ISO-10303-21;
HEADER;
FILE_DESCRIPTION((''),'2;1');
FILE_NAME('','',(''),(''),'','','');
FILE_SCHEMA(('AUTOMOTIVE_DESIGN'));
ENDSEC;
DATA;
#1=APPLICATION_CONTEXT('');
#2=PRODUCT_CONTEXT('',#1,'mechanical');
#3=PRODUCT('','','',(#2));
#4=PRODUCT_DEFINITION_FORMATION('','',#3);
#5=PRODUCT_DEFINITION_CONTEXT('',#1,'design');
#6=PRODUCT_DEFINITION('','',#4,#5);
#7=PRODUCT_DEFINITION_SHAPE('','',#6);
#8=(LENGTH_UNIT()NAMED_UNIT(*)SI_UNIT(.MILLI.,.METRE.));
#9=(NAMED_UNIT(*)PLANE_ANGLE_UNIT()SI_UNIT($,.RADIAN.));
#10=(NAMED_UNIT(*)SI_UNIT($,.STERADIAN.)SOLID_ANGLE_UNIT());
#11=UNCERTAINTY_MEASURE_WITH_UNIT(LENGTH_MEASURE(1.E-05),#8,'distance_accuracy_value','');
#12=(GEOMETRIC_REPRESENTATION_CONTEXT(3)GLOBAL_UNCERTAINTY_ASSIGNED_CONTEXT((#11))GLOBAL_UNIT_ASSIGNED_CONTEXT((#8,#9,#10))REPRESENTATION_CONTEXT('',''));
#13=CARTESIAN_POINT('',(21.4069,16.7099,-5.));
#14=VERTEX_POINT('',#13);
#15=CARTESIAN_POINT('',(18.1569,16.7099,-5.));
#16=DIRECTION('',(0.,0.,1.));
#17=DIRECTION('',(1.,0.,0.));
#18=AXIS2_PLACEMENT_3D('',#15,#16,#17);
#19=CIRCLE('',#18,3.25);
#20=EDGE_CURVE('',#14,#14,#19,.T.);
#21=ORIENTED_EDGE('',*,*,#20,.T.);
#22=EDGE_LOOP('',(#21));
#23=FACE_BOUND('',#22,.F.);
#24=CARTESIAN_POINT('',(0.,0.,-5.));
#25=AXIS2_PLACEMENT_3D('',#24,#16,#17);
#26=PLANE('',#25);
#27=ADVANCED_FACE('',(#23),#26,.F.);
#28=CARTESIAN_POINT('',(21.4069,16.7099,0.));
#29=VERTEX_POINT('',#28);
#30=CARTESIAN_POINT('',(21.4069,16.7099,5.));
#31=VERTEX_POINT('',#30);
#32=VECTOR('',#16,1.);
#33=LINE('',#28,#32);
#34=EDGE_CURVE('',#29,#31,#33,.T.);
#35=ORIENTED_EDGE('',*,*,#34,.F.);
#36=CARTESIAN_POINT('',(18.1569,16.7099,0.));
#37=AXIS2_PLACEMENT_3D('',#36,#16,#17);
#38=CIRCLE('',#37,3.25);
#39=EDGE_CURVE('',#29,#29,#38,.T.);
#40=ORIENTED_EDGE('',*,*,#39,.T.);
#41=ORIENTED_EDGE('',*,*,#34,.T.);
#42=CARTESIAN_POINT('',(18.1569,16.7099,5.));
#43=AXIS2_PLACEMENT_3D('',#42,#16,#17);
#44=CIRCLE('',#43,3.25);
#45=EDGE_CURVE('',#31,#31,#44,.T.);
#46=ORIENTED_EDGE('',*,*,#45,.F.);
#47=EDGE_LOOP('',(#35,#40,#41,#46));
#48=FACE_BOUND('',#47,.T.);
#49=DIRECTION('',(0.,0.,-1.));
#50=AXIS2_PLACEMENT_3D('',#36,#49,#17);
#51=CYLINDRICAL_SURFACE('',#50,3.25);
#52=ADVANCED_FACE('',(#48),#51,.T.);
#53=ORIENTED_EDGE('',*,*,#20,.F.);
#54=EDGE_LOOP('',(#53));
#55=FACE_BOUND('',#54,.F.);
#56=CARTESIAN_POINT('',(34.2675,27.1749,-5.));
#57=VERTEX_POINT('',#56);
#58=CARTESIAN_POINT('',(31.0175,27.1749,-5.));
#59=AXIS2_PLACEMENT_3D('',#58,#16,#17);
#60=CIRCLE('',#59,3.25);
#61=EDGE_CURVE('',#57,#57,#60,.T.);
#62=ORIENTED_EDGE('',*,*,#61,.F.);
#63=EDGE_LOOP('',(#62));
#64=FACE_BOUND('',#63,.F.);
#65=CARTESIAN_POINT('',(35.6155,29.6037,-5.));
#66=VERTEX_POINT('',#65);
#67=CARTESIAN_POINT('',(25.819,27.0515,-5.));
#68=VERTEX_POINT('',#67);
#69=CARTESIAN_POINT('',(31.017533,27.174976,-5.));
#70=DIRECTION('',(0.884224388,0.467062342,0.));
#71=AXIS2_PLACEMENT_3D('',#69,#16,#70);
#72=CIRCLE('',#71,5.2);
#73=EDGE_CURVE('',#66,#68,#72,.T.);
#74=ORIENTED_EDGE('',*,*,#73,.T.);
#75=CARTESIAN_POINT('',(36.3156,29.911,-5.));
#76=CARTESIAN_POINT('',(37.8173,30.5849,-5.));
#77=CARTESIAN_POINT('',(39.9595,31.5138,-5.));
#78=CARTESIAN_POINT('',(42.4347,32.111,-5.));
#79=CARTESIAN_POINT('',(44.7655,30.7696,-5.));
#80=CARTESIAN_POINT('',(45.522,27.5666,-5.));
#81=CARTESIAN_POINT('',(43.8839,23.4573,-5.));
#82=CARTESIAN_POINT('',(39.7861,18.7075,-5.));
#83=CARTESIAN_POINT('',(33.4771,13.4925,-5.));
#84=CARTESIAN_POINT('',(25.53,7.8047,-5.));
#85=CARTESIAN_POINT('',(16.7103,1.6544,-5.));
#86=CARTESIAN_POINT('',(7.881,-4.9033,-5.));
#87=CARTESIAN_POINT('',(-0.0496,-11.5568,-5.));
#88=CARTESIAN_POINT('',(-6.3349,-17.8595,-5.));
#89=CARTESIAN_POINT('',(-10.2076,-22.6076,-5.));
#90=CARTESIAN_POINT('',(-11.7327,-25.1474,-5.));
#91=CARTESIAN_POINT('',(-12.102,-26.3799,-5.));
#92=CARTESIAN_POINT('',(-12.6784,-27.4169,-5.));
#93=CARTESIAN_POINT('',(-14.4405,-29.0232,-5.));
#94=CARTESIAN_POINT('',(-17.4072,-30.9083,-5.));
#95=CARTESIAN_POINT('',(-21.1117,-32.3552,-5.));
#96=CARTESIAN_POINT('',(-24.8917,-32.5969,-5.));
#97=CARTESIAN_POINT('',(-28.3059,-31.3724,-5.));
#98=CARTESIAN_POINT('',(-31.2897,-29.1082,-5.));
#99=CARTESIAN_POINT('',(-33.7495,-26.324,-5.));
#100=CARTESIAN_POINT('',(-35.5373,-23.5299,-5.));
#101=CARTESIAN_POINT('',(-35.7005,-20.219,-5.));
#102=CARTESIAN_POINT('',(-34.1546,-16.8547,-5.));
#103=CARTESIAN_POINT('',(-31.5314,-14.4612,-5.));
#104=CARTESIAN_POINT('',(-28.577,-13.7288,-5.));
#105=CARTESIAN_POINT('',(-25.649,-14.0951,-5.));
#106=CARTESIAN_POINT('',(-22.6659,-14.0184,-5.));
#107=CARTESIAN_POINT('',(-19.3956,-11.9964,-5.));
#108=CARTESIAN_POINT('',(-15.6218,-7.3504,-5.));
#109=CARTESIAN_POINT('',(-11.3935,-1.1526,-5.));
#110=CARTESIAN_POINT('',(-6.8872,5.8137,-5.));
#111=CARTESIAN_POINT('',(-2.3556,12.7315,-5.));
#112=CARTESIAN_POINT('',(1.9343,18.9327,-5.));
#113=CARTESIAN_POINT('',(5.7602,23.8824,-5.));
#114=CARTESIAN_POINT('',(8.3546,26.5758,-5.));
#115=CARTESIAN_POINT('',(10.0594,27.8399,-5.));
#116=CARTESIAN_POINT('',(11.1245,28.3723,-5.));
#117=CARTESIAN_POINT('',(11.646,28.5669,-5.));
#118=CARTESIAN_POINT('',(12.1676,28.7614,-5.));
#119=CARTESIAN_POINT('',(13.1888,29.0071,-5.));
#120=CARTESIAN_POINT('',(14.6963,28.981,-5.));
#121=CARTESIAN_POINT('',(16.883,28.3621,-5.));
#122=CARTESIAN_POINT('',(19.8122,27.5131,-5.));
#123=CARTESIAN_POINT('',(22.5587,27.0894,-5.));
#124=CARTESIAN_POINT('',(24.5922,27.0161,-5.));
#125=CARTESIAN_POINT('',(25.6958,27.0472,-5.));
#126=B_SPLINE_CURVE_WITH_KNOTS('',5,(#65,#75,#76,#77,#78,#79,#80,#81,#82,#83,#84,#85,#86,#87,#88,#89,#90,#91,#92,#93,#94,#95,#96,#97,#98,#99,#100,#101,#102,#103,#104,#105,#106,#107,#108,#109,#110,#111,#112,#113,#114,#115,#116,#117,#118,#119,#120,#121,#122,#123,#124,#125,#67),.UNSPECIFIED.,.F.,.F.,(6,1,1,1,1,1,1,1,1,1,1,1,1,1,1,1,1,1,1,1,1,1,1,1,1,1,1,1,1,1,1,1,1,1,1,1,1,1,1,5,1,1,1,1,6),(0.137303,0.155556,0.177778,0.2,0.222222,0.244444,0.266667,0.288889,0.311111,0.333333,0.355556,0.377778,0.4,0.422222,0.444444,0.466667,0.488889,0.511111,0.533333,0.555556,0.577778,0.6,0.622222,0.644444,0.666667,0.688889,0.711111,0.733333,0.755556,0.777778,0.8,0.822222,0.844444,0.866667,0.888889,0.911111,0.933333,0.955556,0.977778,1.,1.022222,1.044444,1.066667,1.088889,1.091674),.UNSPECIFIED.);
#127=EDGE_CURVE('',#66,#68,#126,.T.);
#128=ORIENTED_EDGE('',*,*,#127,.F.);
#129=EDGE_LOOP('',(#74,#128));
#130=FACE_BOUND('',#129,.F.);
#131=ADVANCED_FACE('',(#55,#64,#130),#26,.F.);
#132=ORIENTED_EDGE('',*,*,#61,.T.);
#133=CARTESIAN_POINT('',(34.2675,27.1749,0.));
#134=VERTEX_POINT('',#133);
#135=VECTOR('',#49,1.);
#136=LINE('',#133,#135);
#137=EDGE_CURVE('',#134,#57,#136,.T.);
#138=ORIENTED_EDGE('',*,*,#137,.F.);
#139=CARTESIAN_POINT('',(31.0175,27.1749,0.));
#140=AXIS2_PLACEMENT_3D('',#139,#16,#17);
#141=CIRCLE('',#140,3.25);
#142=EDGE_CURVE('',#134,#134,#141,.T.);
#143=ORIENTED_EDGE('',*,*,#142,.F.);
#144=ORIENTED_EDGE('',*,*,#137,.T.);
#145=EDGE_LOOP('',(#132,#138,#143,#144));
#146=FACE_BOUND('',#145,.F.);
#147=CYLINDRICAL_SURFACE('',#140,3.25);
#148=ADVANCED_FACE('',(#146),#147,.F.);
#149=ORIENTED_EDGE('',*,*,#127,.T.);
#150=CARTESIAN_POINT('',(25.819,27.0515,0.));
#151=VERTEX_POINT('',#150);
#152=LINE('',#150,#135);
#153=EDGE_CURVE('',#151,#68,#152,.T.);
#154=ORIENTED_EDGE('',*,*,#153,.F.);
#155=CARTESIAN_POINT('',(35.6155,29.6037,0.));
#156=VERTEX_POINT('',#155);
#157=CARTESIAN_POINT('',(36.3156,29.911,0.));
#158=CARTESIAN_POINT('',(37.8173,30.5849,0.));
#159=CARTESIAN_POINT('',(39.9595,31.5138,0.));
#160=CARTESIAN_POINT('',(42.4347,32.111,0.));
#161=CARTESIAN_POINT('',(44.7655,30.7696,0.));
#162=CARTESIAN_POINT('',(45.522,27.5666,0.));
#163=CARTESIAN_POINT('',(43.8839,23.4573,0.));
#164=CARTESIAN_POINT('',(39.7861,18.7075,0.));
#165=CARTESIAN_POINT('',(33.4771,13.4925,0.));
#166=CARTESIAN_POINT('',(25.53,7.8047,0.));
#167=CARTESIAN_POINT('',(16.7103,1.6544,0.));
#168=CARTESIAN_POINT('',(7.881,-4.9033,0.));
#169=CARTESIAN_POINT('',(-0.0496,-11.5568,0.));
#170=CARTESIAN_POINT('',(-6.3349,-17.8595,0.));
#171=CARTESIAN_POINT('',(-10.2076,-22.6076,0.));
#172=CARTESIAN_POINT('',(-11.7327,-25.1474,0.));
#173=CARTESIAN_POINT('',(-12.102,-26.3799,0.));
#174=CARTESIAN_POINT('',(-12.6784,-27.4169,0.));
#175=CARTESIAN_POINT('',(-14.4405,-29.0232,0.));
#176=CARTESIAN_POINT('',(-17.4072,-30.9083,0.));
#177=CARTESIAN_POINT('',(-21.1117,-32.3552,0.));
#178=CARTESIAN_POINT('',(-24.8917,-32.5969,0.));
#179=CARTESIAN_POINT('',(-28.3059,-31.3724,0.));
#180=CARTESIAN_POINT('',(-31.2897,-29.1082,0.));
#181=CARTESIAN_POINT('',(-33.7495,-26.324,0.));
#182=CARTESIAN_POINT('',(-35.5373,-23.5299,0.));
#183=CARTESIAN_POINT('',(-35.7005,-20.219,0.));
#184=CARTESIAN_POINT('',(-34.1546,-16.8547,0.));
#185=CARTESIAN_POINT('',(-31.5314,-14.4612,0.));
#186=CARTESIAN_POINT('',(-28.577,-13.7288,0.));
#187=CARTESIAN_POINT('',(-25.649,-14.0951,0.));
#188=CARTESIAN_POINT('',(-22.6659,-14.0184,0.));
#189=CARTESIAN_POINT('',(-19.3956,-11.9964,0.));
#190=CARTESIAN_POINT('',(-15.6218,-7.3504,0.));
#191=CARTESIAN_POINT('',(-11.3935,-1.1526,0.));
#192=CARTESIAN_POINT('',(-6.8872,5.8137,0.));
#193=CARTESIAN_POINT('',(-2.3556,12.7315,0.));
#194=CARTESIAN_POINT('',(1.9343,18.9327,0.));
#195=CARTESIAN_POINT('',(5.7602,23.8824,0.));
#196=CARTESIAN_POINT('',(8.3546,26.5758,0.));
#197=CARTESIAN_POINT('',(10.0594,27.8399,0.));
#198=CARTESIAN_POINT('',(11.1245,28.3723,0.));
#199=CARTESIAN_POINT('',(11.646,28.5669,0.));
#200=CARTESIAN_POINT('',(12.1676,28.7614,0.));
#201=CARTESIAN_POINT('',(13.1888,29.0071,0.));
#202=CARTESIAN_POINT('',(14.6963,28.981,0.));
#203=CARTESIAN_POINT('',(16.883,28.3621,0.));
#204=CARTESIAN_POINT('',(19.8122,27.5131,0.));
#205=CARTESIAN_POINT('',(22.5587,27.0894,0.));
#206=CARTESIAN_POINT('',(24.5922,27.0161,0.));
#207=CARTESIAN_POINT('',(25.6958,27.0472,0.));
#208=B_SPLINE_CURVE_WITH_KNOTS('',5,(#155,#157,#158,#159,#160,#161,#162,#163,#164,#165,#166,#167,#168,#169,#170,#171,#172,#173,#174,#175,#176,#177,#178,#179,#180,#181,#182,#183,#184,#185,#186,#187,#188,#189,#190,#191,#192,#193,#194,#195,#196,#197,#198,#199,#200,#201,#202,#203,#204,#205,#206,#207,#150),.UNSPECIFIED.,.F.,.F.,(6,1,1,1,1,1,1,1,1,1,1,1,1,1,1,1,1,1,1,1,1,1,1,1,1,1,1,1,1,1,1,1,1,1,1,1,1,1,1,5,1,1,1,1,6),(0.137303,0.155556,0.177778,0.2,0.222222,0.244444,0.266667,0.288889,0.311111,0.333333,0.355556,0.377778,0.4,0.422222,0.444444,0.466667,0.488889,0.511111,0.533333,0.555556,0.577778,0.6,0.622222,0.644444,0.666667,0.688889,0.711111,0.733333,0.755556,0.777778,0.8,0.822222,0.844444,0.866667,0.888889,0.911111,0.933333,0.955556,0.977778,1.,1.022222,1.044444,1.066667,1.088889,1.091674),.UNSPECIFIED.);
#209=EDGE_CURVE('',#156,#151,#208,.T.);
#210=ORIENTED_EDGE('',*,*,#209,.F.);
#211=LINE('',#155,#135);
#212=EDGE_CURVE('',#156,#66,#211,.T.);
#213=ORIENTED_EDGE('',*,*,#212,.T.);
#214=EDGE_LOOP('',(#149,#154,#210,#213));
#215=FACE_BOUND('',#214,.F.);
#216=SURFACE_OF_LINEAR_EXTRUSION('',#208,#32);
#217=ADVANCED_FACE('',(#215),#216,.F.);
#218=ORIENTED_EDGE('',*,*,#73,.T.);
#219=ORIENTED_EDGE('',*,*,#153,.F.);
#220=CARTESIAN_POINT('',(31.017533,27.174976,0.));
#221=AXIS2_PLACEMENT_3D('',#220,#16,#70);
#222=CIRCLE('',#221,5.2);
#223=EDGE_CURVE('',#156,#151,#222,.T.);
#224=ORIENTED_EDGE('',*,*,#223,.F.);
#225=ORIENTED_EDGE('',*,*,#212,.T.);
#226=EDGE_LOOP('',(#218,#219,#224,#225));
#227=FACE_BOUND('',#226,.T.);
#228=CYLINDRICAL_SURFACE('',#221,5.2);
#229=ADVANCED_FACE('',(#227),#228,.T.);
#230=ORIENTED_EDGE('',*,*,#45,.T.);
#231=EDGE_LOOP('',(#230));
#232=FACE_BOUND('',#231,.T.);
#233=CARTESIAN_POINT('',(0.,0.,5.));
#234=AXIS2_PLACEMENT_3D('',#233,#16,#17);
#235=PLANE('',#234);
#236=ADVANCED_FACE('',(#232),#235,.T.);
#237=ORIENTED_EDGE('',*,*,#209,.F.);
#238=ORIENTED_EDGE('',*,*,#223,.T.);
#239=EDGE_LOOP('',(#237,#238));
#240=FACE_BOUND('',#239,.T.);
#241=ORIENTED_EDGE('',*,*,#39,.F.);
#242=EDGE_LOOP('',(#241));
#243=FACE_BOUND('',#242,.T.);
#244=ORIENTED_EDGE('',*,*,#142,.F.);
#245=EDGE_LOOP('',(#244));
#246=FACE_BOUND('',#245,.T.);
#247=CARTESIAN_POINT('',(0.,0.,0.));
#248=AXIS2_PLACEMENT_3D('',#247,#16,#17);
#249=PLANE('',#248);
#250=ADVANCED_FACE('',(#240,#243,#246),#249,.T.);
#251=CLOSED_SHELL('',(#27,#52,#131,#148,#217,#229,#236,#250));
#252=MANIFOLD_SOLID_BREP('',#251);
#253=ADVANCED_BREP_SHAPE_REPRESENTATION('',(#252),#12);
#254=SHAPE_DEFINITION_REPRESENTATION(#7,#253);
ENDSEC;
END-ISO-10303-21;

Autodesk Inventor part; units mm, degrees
ref_plane "YZ Plane" through (0, 0, 0) normal (1, 0, 0) x (0, 1, 0)
ref_plane "XZ Plane" through (0, 0, 0) normal (0, 1, 0) x (-1, 0, 0)
ref_plane "XY Plane" through (0, 0, 0) normal (0, 0, 1) x (1, 0, 0)
sketch "Sketch2" plane through (0, 0, 0) normal (0, 0, 1) x (1, 0, 0)
  circle A0 centre (18.1569, 16.7099) radius 3.25
  circle A1 centre (31.0175, 27.1749) radius 3.25
  spline S0 degree 5 poles (35.6155, 29.6037) (36.3156, 29.911) (37.8173, 30.5849) (39.9595, 31.5138) (42.4347, 32.111) (44.7655, 30.7696) (45.522, 27.5666) (43.8839, 23.4573) (39.7861, 18.7075) (33.4771, 13.4925) (25.53, 7.8047) (16.7103, 1.6544) (7.881, -4.9033) (-0.0496, -11.5568) (-6.3349, -17.8595) (-10.2076, -22.6076) (-11.7327, -25.1474) (-12.102, -26.3799) (-12.6784, -27.4169) (-14.4405, -29.0232) (-17.4072, -30.9083) (-21.1117, -32.3552) (-24.8917, -32.5969) (-28.3059, -31.3724) (-31.2897, -29.1082) (-33.7495, -26.324) (-35.5373, -23.5299) (-35.7005, -20.219) (-34.1546, -16.8547) (-31.5314, -14.4612) (-28.577, -13.7288) (-25.649, -14.0951) (-22.6659, -14.0184) (-19.3956, -11.9964) (-15.6218, -7.3504) (-11.3935, -1.1526) (-6.8872, 5.8137) (-2.3556, 12.7315) (1.9343, 18.9327) (5.7602, 23.8824) (8.3546, 26.5758) (10.0594, 27.8399) (11.1245, 28.3723) (11.646, 28.5669) (12.1676, 28.7614) (13.1888, 29.0071) (14.6963, 28.981) (16.883, 28.3621) (19.8122, 27.5131) (22.5587, 27.0894) (24.5922, 27.0161) (25.6958, 27.0472) (25.819, 27.0515) knots 0.137303 0.137303 0.137303 0.137303 0.137303 0.137303 0.155556 0.177778 0.2 0.222222 0.244444 0.266667 0.288889 0.311111 0.333333 0.355556 0.377778 0.4 0.422222 0.444444 0.466667 0.488889 0.511111 0.533333 0.555556 0.577778 0.6 0.622222 0.644444 0.666667 0.688889 0.711111 0.733333 0.755556 0.777778 0.8 0.822222 0.844444 0.866667 0.888889 0.911111 0.933333 0.955556 0.977778 1 1 1 1 1 1.022222 1.044444 1.066667 1.088889 1.091674 1.091674 1.091674 1.091674 1.091674 1.091674 weights 1 1 1 1 1 1 1 1 1 1 1 1 1 1 1 1 1 1 1 1 1 1 1 1 1 1 1 1 1 1 1 1 1 1 1 1 1 1 1 1 1 1 1 1 1 1 1 1 1 1 1 1 1
  arc A2 (35.6155, 29.6037) -> (25.819, 27.0515) centre (31.0175, 27.1749) ccw
  point P0 (0, 0)
  dimension "d4" = 6.5
extrude "Extrusion1" add sketch "Sketch2" against normal blind 5 contours A0 | S0 A2
extrude "Extrusion2" add sketch "Sketch2" along normal blind 5 contours A0
equation "\"d4\" = R"
equation "\"d0\" = thickness"
equation "\"d2\" = thickness"
equation "\"R\" = 6.5"
equation "\"thickness\" = 5"
equation "\"width\" = 6.5"
equation "\"R1\" = 9"
